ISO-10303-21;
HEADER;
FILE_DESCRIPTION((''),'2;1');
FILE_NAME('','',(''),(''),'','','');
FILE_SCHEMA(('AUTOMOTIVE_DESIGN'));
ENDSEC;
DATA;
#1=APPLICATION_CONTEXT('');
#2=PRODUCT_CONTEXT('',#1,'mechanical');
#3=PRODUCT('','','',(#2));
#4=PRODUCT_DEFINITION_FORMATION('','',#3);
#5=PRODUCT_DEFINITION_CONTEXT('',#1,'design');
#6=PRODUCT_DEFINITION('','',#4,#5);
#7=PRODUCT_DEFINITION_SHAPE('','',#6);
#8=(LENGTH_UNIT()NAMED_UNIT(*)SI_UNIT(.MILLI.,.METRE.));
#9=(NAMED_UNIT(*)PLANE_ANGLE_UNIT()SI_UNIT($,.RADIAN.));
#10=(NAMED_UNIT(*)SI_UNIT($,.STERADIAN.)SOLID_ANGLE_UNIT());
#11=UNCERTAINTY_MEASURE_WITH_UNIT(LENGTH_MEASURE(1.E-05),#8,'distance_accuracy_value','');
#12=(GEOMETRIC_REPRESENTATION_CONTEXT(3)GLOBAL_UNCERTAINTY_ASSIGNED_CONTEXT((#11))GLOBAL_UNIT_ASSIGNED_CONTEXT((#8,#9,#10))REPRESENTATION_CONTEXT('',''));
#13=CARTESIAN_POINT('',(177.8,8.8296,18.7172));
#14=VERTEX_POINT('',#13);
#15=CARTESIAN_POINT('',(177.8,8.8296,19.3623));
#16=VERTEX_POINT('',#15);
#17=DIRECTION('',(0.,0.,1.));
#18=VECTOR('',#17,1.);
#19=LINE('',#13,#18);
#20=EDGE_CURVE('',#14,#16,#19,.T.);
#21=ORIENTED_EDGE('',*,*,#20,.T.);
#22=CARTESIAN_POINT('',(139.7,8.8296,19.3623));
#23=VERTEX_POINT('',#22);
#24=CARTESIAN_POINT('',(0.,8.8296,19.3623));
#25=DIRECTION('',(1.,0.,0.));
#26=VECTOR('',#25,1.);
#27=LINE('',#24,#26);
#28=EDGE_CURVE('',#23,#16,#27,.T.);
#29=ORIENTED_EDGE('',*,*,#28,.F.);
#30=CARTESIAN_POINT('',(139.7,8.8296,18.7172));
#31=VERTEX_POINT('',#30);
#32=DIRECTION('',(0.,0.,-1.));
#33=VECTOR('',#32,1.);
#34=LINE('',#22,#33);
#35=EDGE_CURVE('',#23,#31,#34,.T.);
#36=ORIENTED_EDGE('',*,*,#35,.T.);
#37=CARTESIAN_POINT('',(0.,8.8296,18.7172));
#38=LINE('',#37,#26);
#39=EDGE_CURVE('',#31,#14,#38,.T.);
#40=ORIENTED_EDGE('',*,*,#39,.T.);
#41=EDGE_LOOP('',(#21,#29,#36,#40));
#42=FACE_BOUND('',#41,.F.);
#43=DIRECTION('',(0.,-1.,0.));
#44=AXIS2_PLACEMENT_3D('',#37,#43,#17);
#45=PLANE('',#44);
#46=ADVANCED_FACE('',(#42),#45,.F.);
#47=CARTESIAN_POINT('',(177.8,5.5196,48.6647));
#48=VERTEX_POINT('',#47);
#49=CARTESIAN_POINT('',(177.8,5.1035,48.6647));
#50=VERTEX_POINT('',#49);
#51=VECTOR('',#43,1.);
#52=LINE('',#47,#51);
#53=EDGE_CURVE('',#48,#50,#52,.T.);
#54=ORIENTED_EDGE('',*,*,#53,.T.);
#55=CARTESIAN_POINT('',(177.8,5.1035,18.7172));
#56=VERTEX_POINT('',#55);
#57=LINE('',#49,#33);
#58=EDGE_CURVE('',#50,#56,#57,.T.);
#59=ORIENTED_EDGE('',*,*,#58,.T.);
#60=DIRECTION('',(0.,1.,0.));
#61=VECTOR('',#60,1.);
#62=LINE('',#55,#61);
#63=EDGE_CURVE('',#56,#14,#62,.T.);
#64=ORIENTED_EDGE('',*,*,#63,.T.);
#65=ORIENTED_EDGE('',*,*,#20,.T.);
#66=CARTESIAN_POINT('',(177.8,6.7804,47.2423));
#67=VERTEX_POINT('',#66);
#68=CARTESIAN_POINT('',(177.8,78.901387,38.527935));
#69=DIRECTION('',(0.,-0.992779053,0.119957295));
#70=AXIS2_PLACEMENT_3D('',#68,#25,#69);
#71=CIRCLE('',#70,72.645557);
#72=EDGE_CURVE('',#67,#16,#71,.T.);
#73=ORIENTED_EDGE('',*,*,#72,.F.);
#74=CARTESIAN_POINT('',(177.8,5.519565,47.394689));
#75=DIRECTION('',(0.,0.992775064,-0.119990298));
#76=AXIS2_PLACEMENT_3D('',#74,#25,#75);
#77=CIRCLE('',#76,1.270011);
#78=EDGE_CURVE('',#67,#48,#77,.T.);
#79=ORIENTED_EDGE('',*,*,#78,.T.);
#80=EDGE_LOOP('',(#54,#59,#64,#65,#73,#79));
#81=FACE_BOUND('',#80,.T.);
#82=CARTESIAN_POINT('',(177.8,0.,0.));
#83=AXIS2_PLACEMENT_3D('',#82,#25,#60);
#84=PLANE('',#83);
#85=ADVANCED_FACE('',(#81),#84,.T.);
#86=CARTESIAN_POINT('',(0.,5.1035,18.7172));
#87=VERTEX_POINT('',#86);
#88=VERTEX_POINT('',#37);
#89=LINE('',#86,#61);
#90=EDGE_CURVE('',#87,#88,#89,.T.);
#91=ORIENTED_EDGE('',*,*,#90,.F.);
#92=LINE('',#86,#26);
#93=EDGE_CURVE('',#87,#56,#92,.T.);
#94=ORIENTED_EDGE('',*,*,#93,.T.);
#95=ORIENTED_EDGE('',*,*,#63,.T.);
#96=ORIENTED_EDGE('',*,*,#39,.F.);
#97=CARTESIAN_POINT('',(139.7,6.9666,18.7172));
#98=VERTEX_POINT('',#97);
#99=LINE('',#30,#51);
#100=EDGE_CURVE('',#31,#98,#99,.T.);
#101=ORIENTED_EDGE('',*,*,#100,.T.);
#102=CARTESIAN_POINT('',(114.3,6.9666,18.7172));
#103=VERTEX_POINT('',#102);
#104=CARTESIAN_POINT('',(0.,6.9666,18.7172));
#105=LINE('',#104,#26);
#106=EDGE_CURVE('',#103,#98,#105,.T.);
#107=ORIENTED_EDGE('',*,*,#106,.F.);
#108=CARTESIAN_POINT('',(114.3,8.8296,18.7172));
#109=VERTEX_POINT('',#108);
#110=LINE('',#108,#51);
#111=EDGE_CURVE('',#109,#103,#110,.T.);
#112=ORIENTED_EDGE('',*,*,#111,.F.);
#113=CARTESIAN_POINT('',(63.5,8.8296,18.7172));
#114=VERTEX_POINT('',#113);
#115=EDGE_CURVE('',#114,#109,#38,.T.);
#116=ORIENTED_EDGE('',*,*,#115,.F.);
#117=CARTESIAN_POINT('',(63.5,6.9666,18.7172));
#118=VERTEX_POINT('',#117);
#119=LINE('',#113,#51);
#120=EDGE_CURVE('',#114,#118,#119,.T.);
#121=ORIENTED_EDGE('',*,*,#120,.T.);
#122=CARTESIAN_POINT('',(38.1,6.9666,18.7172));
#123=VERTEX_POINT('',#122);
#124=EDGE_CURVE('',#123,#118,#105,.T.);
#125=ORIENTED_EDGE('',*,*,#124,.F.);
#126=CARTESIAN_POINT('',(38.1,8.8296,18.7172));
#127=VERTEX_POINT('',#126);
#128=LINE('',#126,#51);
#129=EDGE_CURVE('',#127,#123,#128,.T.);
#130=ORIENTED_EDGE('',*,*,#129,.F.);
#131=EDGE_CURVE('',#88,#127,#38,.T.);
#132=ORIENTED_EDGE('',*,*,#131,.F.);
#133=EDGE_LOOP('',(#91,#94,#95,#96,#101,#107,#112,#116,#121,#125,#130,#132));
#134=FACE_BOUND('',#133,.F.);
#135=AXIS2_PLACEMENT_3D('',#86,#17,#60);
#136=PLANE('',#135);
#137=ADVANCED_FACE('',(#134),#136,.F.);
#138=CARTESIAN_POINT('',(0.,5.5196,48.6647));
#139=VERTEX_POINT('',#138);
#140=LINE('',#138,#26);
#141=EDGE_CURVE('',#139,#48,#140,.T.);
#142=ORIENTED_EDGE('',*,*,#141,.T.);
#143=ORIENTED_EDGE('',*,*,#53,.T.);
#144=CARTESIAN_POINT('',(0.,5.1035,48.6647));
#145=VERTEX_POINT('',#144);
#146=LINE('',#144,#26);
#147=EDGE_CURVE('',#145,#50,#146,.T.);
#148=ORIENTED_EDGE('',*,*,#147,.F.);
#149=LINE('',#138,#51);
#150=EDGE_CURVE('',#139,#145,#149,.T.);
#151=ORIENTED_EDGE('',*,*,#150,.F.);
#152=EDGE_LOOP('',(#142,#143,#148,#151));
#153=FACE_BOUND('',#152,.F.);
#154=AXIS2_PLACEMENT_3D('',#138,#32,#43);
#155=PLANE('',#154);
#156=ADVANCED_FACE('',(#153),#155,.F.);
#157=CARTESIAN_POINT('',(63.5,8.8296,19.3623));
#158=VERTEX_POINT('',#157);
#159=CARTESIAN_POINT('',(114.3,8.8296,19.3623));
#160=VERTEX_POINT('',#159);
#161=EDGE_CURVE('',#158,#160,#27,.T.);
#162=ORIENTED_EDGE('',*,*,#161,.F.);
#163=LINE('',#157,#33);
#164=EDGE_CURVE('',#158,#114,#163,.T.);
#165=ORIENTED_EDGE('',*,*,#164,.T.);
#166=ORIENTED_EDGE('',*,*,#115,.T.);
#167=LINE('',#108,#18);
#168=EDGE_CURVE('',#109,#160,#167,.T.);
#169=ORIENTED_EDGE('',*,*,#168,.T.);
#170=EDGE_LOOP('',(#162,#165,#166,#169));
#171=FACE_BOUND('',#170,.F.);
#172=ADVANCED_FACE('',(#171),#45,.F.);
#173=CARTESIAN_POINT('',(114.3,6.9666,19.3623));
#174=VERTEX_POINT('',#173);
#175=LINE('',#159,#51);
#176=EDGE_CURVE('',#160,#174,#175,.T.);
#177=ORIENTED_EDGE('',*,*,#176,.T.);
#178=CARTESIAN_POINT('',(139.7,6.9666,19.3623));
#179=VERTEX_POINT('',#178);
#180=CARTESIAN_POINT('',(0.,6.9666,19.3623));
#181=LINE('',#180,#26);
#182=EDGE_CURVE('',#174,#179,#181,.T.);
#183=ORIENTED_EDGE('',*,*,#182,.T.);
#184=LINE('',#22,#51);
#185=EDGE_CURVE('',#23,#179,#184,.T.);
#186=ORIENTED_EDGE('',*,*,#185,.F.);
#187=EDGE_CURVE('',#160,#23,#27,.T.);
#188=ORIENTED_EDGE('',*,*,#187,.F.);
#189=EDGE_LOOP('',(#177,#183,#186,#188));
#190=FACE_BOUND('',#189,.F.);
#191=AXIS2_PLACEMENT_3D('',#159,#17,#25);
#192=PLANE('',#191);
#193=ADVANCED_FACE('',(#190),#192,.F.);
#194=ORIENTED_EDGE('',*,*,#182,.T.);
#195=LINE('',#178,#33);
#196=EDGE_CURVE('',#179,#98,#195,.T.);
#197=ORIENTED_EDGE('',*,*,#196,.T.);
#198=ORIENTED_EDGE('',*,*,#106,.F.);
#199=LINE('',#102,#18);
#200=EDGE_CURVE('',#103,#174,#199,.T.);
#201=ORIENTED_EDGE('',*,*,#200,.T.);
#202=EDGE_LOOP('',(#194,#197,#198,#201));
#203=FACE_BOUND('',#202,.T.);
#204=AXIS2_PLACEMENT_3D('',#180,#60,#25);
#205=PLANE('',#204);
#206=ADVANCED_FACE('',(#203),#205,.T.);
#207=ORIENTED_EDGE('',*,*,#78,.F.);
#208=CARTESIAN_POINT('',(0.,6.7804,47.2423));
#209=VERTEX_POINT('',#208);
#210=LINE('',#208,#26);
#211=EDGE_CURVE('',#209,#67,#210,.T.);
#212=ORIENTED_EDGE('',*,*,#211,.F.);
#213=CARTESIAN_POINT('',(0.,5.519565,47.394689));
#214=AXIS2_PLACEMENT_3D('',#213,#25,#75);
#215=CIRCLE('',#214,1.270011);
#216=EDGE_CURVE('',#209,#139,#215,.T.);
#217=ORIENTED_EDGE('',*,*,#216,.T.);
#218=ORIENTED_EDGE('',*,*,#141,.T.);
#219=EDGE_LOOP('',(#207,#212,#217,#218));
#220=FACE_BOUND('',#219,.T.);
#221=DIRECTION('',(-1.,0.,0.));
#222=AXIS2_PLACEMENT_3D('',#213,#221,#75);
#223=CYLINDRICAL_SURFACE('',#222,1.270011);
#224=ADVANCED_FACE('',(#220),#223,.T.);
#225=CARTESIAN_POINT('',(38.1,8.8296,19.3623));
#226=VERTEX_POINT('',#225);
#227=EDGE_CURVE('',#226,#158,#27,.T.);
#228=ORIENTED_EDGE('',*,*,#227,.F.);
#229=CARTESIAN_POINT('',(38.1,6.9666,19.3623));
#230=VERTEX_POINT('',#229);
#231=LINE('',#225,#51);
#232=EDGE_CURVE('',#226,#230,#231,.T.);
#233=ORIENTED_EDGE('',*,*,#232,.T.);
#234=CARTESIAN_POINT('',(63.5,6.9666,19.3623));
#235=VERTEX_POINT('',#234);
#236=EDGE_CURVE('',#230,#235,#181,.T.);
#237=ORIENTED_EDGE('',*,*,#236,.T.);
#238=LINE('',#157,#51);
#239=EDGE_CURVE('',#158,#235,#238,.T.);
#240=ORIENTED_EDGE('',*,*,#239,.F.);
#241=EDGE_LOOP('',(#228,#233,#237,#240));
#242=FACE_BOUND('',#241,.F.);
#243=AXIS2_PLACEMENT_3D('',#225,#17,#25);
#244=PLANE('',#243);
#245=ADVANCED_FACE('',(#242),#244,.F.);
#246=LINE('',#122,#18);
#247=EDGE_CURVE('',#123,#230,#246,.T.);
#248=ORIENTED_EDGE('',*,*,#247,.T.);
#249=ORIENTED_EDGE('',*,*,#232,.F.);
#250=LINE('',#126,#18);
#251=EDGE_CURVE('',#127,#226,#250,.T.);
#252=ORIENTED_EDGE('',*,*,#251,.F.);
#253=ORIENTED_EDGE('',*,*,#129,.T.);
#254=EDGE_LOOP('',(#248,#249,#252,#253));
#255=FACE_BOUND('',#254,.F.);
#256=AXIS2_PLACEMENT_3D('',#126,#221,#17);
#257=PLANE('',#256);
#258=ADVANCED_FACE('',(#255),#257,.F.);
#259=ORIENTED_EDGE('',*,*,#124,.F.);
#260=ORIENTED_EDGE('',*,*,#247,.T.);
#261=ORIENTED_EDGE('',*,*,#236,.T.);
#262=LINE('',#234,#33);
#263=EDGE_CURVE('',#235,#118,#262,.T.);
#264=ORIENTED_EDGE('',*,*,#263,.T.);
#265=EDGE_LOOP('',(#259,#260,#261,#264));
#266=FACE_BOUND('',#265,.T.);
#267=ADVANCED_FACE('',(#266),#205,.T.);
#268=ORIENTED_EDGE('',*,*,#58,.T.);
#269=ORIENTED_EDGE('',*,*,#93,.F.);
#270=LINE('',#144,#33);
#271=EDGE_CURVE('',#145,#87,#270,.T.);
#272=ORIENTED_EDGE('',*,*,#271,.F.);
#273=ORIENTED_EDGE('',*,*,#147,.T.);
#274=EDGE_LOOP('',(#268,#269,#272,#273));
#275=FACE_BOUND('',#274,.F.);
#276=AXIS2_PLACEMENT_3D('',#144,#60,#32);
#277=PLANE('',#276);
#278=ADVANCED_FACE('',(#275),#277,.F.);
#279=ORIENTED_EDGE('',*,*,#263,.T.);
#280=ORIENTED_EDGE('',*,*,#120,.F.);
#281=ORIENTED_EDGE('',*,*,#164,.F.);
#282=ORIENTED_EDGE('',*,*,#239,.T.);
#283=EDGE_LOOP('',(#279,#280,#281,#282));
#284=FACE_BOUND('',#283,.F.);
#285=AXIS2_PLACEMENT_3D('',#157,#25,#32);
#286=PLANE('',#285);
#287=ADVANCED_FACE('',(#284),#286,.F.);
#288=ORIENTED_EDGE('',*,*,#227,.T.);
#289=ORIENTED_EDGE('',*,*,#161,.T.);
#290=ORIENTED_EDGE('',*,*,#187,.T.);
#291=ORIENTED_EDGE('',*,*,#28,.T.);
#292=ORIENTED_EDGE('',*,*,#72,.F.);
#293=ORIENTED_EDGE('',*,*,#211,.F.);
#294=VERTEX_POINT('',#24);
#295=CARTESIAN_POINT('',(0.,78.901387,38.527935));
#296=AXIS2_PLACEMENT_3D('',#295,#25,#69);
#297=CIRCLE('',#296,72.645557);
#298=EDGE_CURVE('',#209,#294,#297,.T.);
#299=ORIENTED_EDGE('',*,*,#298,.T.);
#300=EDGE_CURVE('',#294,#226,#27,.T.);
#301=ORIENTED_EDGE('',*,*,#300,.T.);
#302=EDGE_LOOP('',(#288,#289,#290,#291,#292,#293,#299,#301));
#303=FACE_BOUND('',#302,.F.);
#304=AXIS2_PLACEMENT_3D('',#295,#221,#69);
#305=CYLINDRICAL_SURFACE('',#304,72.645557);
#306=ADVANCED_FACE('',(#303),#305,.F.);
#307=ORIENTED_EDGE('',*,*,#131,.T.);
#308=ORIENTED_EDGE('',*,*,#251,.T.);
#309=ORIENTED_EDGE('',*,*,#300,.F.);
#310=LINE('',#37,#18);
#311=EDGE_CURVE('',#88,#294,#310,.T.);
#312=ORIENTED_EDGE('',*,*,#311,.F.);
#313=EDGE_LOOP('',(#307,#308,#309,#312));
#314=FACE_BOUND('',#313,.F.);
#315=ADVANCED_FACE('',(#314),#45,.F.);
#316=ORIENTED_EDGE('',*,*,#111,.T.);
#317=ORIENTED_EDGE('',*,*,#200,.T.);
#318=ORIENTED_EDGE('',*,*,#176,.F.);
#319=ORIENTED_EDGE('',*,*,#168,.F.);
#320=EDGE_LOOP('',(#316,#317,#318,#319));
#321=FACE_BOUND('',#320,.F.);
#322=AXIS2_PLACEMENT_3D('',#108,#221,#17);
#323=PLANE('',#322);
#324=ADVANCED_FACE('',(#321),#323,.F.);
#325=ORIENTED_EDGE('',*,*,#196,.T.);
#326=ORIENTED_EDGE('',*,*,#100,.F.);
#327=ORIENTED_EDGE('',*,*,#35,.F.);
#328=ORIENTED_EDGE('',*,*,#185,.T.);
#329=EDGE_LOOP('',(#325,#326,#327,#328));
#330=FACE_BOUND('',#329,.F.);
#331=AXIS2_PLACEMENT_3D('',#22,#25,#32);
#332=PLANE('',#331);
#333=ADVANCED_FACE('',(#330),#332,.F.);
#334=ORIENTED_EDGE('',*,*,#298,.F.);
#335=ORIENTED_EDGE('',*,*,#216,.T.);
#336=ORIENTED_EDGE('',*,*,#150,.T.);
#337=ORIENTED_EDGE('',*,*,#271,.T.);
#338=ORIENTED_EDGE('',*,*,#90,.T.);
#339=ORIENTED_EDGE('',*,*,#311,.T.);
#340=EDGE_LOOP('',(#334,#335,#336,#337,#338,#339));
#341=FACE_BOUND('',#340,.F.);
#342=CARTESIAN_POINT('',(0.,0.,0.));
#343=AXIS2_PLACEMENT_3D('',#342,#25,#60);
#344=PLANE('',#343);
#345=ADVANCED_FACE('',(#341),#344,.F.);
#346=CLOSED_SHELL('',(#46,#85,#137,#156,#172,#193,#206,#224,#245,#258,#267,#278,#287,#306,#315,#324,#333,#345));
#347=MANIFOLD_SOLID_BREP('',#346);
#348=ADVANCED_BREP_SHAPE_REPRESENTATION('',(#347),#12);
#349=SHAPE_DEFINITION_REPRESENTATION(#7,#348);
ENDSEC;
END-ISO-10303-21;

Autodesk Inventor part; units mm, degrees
ref_plane "YZ Plane" through (0, 0, 0) normal (1, 0, 0) x (0, 1, 0)
ref_plane "XZ Plane" through (0, 0, 0) normal (0, 1, 0) x (-1, 0, 0)
ref_plane "XY Plane" through (0, 0, 0) normal (0, 0, 1) x (1, 0, 0)
sketch "Sketch1" plane through (0, 0, 0) normal (1, 0, 0) x (0, 1, 0)
  arc A0 (6.7804, 47.2423) -> (8.8296, 19.3623) centre (78.9029, 38.5279) ccw
  line L0 (5.5196, 48.6647) -> (5.1035, 48.6647)
  line L1 (5.1035, 48.6647) -> (5.1035, 18.7172)
  line L2 (5.1035, 18.7172) -> (8.8296, 18.7172)
  line L3 (8.8296, 18.7172) -> (8.8296, 19.3623)
  arc A1 (6.7804, 47.2423) -> (5.5196, 48.6647) centre (5.5196, 47.3947) ccw
  point P0 (0, 0)
  point P1 (6.9666, 48.6647)
  dimension "d25" = 1.27
extrude "Extrusion1" add sketch "Sketch1" along normal blind 177.8
sketch "Sketch5" plane through (0, 8.8296, 19.3623) normal (0, 1, 0) x (1, 0, 0)
  point P0 (0, 19.3623)
sketch "Sketch6" plane through (0, 8.8296, 19.3623) normal (0, 1, 0) x (1, 0, 0)
  line L0 (0, 0.6451) -> (177.8, 0.6451) projected
  line L1 (38.1, 0.6451) -> (38.1, 0)
  line L2 (0, 0) -> (177.8, 0) projected
  line L3 (38.1, 0) -> (63.5, 0)
  line L4 (63.5, 0) -> (63.5, 0.6451)
  line L5 (63.5, 0.6451) -> (38.1, 0.6451)
  line L6 (114.3, 0.6451) -> (114.3, 0)
  line L7 (114.3, 0) -> (139.7, 0)
  line L8 (139.7, 0) -> (139.7, 0.6451)
  line L9 (114.3, 0.6451) -> (139.7, 0.6451)
  line L10 (0, 0.6451) -> (0, 0) projected
  point P0 (0, 19.3623)
  point P1 (63.5, 0)
  point P2 (63.5, 0.6451)
  dimension "d12" = 25.4
  dimension "d13" = 25.4
  dimension "d14" = 50.8
  dimension "d15" = 38.1
extrude "Extrusion4" cut sketch "Sketch6" against normal up to surface (1.863 mm away) contours L0 L4 L2 L1 | L0 L8 L2 L6
properties part number "Pen Holder"
